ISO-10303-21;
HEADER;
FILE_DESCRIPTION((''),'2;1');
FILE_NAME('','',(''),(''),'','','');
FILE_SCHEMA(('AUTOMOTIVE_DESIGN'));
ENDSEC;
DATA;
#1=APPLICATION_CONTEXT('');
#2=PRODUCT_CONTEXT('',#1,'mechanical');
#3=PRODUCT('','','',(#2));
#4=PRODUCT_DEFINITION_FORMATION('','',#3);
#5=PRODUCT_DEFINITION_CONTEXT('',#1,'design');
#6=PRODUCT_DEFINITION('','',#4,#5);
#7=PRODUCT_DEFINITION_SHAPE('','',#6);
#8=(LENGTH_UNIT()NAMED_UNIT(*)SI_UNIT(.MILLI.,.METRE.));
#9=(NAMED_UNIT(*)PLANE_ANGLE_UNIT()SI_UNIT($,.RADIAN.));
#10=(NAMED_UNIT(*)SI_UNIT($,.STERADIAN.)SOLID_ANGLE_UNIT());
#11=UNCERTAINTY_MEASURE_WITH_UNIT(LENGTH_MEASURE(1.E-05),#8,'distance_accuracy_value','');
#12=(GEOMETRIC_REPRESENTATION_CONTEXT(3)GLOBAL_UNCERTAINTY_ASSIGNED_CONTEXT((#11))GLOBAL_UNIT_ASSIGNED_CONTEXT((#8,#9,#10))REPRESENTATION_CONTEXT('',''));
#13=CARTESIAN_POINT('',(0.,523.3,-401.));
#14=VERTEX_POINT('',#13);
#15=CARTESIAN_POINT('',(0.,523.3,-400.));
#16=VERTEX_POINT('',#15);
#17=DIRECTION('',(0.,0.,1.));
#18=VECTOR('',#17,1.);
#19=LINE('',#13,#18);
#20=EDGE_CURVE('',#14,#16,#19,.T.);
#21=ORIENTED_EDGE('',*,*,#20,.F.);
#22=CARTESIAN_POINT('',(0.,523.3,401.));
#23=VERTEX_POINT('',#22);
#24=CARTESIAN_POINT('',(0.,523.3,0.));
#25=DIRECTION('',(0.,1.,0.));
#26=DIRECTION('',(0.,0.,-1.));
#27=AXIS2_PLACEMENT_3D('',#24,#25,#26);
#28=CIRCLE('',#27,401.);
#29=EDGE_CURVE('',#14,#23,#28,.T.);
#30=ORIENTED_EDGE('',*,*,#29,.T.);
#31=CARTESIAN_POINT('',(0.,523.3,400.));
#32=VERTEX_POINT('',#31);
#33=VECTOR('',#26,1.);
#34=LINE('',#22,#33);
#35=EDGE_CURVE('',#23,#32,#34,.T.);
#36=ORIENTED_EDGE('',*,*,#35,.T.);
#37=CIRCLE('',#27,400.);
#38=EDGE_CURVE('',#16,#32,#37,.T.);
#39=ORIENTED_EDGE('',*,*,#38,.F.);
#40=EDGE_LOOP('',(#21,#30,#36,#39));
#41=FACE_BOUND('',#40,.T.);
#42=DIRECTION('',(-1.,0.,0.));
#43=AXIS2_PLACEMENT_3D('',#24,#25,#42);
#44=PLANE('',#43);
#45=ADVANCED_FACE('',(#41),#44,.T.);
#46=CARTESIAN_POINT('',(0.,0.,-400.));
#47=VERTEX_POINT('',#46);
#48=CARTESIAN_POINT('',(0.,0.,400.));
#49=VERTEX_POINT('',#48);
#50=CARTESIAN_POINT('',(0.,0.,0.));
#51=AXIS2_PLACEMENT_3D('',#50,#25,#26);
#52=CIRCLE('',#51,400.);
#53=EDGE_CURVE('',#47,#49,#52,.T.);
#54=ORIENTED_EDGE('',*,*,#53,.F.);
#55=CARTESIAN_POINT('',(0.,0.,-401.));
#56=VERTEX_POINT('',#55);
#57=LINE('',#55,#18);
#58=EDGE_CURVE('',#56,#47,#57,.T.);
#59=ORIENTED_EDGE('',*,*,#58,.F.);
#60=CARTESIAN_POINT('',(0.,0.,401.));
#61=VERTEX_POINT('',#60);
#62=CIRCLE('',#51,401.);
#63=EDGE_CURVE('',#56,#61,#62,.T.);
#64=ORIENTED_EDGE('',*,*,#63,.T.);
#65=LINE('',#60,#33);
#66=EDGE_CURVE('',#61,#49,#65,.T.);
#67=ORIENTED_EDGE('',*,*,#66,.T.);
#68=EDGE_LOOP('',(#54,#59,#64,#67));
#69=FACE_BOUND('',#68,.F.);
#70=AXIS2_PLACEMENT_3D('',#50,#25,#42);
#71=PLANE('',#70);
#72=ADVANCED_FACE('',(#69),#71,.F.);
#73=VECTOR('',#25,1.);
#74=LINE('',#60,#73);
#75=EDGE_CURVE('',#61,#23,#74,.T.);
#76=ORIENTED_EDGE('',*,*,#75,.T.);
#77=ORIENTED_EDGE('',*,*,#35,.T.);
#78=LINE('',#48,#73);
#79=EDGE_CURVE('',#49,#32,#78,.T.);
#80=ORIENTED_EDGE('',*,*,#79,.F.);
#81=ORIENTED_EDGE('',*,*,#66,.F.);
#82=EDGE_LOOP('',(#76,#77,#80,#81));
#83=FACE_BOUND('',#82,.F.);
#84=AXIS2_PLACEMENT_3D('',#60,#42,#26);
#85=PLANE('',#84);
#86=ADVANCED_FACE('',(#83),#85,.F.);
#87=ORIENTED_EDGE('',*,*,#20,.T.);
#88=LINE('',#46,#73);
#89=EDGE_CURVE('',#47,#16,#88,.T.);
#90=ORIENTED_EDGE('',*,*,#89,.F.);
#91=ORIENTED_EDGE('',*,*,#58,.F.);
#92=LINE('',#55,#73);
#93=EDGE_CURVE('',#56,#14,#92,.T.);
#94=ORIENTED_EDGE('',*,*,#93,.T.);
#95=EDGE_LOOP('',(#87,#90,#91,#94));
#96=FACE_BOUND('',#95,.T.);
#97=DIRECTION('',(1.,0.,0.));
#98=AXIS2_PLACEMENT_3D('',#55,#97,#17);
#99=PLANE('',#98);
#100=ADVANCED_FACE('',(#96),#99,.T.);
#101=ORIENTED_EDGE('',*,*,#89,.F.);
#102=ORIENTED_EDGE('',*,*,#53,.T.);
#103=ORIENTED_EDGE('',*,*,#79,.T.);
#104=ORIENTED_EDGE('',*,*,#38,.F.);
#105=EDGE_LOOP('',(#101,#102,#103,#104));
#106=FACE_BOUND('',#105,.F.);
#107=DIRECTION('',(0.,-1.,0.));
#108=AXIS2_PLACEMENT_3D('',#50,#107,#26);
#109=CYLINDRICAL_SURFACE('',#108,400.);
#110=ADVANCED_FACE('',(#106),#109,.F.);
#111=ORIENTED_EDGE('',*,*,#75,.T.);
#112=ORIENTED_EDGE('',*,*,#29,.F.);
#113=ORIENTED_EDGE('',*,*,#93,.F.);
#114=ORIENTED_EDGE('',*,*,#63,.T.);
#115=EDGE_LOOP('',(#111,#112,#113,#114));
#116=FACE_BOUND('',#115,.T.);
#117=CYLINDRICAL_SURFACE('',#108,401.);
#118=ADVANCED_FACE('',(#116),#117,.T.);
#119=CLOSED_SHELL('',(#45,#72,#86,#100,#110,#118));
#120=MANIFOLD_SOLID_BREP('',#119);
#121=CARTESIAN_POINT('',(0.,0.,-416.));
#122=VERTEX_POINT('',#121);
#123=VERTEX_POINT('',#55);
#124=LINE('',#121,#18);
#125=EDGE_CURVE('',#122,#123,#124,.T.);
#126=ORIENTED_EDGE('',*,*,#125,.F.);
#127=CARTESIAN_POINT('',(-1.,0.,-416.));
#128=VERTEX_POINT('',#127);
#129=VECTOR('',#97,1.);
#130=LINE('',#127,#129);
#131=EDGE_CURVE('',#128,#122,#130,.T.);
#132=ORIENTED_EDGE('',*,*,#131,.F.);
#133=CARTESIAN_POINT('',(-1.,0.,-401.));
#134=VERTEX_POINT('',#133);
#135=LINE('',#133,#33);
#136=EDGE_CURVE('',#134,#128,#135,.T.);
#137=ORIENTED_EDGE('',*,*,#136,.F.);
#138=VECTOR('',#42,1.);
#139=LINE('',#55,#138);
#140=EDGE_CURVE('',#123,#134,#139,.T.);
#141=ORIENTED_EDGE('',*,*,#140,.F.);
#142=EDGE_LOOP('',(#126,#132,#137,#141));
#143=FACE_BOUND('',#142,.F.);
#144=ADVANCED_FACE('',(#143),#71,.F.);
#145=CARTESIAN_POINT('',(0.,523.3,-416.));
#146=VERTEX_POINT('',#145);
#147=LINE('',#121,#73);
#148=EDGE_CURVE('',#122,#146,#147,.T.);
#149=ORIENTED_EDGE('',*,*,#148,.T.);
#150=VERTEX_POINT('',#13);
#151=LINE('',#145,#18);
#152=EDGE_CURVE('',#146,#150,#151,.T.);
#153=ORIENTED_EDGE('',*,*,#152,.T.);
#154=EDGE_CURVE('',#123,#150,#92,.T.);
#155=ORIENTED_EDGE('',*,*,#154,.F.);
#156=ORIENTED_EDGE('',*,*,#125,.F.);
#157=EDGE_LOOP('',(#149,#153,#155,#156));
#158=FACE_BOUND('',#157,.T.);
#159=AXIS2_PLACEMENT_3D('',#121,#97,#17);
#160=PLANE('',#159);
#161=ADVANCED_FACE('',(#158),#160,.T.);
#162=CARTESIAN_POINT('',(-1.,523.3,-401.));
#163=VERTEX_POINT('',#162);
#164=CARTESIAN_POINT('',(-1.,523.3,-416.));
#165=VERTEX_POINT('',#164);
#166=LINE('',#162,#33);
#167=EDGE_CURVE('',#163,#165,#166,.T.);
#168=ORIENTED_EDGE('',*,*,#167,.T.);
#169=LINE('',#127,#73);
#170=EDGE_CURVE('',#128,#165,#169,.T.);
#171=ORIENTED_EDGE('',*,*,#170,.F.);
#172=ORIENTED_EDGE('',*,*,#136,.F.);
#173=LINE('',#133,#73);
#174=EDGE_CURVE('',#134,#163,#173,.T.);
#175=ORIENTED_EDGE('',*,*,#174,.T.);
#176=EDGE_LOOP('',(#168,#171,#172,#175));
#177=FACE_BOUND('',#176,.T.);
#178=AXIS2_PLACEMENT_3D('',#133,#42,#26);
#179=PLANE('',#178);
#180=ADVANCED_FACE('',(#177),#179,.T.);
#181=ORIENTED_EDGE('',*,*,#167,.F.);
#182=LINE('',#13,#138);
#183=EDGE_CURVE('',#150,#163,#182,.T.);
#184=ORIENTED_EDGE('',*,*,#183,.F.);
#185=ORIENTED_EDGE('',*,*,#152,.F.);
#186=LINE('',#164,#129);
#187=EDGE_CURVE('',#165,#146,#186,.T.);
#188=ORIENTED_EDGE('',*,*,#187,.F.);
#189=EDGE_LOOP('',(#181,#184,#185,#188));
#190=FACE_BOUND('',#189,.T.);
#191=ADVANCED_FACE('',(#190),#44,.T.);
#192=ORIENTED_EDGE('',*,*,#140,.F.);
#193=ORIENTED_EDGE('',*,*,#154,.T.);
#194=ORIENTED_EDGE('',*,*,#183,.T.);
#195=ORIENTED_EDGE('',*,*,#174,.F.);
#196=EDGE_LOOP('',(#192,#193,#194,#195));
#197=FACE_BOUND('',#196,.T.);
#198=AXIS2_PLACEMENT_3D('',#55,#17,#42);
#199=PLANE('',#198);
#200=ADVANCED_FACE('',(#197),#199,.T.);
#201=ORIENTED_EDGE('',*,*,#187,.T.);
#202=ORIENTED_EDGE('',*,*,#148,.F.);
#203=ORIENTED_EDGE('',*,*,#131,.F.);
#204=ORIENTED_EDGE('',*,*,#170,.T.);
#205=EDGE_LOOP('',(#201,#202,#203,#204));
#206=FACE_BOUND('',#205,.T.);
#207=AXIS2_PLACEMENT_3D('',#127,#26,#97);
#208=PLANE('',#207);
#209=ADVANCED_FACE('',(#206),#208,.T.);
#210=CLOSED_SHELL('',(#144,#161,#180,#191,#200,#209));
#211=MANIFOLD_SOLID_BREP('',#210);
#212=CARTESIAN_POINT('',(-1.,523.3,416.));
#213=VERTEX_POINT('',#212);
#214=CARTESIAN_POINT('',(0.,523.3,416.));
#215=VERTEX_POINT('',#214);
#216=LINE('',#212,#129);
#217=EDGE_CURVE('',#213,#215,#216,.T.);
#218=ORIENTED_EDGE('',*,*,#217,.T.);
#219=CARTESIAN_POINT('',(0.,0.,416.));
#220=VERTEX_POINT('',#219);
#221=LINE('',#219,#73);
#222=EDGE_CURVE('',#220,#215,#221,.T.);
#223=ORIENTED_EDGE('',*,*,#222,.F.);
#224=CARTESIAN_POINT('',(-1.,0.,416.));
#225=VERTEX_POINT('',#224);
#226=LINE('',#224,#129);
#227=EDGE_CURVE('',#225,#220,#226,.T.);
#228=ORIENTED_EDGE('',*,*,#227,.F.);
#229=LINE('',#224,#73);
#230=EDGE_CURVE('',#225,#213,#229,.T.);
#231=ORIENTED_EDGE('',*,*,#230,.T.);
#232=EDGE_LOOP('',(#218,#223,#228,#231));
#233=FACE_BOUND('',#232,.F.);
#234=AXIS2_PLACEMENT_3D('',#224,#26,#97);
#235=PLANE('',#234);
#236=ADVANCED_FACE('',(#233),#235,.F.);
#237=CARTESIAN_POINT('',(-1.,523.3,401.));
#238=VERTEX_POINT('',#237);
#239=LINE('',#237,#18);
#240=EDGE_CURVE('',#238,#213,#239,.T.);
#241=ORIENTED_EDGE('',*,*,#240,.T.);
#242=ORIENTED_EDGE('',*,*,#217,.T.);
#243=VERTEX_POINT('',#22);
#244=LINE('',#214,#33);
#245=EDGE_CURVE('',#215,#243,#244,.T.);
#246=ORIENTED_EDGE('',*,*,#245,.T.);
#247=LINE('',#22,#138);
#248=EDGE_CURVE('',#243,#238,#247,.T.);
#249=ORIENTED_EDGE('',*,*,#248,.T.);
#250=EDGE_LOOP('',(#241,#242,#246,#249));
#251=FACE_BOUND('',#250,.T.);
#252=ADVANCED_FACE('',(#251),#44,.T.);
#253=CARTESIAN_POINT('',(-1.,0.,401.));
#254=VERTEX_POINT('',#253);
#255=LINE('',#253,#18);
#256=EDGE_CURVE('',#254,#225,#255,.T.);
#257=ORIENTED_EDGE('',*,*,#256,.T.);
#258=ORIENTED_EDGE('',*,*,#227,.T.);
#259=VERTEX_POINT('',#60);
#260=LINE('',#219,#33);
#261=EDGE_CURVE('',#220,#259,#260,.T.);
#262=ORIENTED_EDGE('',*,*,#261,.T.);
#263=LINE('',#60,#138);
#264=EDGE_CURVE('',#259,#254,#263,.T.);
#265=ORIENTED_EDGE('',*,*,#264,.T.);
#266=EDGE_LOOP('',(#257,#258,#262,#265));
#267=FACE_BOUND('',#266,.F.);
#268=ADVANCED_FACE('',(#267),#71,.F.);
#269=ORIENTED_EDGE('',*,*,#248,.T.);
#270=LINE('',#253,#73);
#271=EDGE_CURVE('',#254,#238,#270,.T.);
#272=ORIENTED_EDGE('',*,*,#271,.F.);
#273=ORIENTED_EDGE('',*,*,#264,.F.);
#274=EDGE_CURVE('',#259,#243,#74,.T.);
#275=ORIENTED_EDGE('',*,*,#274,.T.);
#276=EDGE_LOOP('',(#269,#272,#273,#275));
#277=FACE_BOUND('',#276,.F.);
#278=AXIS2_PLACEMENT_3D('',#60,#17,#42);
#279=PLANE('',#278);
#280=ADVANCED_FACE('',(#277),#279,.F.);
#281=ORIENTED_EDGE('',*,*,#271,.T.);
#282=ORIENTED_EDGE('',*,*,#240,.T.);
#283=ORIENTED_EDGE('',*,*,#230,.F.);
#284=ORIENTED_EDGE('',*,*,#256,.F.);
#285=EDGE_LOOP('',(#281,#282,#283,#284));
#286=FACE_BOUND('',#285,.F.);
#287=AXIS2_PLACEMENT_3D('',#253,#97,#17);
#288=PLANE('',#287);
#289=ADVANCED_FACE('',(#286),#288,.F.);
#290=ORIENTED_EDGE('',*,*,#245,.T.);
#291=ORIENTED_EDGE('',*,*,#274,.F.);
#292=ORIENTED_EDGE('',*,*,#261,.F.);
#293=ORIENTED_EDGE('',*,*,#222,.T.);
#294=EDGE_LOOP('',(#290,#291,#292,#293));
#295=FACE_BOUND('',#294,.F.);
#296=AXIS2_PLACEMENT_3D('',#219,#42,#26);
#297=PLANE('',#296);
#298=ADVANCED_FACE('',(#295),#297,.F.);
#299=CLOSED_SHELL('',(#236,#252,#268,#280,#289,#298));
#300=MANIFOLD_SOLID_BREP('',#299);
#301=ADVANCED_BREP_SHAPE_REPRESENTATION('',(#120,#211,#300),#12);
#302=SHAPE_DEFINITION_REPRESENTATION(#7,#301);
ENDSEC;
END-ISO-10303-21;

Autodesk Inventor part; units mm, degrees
ref_plane "YZ Plane" through (0, 0, 0) normal (1, 0, 0) x (0, 1, 0)
ref_plane "XZ Plane" through (0, 0, 0) normal (0, 1, 0) x (-1, 0, 0)
ref_plane "XY Plane" through (0, 0, 0) normal (0, 0, 1) x (1, 0, 0)
sketch "Sketch1" plane through (0, 0, 0) normal (0, 1, 0) x (-1, 0, 0)
  arc A0 (0, -401) -> (0, 401) centre (0, 0) ccw
  line L0 (0, 0) -> (0, 401) construction
  line L1 (0, 0) -> (0, -401) construction
  arc A1 (0, -400) -> (0, 400) centre (0, 0) ccw
  line L2 (0, 0) -> (0, 400) construction
  line L3 (0, 0) -> (0, -400) construction
  line L4 (0, 401) -> (0, 400)
  line L5 (0, -401) -> (0, -400)
  dimension "d0" = 401
  dimension "d1" = 180
  dimension "d2" = 400
  dimension "d3" = 180
extrude "Extrusion1" add sketch "Sketch1" along normal blind 523.3
sketch "Sketch2" plane through (0, 0, 0) normal (0, 1, 0) x (-1, 0, 0)
  line L0 (0, 401) -> (1, 401)
  line L1 (1, 401) -> (1, 416)
  line L2 (1, 416) -> (0, 416)
  line L3 (0, 416) -> (0, 401)
  point P0 (0, 0)
  dimension "d6" = 1
  dimension "d7" = 15
extrude "Extrusion2" add sketch "Sketch2" along normal blind 523.3
sketch "Sketch3" plane through (0, 0, 0) normal (0, 1, 0) x (-1, 0, 0)
  line L0 (0, -401) -> (1, -401)
  line L1 (1, -401) -> (1, -416)
  line L2 (1, -416) -> (0, -416)
  line L3 (0, -416) -> (0, -401)
  point P0 (0, 0)
  dimension "d12" = 1
  dimension "d13" = 15
extrude "Extrusion3" add sketch "Sketch3" along normal blind 523.3
properties part number "New Band Design"
